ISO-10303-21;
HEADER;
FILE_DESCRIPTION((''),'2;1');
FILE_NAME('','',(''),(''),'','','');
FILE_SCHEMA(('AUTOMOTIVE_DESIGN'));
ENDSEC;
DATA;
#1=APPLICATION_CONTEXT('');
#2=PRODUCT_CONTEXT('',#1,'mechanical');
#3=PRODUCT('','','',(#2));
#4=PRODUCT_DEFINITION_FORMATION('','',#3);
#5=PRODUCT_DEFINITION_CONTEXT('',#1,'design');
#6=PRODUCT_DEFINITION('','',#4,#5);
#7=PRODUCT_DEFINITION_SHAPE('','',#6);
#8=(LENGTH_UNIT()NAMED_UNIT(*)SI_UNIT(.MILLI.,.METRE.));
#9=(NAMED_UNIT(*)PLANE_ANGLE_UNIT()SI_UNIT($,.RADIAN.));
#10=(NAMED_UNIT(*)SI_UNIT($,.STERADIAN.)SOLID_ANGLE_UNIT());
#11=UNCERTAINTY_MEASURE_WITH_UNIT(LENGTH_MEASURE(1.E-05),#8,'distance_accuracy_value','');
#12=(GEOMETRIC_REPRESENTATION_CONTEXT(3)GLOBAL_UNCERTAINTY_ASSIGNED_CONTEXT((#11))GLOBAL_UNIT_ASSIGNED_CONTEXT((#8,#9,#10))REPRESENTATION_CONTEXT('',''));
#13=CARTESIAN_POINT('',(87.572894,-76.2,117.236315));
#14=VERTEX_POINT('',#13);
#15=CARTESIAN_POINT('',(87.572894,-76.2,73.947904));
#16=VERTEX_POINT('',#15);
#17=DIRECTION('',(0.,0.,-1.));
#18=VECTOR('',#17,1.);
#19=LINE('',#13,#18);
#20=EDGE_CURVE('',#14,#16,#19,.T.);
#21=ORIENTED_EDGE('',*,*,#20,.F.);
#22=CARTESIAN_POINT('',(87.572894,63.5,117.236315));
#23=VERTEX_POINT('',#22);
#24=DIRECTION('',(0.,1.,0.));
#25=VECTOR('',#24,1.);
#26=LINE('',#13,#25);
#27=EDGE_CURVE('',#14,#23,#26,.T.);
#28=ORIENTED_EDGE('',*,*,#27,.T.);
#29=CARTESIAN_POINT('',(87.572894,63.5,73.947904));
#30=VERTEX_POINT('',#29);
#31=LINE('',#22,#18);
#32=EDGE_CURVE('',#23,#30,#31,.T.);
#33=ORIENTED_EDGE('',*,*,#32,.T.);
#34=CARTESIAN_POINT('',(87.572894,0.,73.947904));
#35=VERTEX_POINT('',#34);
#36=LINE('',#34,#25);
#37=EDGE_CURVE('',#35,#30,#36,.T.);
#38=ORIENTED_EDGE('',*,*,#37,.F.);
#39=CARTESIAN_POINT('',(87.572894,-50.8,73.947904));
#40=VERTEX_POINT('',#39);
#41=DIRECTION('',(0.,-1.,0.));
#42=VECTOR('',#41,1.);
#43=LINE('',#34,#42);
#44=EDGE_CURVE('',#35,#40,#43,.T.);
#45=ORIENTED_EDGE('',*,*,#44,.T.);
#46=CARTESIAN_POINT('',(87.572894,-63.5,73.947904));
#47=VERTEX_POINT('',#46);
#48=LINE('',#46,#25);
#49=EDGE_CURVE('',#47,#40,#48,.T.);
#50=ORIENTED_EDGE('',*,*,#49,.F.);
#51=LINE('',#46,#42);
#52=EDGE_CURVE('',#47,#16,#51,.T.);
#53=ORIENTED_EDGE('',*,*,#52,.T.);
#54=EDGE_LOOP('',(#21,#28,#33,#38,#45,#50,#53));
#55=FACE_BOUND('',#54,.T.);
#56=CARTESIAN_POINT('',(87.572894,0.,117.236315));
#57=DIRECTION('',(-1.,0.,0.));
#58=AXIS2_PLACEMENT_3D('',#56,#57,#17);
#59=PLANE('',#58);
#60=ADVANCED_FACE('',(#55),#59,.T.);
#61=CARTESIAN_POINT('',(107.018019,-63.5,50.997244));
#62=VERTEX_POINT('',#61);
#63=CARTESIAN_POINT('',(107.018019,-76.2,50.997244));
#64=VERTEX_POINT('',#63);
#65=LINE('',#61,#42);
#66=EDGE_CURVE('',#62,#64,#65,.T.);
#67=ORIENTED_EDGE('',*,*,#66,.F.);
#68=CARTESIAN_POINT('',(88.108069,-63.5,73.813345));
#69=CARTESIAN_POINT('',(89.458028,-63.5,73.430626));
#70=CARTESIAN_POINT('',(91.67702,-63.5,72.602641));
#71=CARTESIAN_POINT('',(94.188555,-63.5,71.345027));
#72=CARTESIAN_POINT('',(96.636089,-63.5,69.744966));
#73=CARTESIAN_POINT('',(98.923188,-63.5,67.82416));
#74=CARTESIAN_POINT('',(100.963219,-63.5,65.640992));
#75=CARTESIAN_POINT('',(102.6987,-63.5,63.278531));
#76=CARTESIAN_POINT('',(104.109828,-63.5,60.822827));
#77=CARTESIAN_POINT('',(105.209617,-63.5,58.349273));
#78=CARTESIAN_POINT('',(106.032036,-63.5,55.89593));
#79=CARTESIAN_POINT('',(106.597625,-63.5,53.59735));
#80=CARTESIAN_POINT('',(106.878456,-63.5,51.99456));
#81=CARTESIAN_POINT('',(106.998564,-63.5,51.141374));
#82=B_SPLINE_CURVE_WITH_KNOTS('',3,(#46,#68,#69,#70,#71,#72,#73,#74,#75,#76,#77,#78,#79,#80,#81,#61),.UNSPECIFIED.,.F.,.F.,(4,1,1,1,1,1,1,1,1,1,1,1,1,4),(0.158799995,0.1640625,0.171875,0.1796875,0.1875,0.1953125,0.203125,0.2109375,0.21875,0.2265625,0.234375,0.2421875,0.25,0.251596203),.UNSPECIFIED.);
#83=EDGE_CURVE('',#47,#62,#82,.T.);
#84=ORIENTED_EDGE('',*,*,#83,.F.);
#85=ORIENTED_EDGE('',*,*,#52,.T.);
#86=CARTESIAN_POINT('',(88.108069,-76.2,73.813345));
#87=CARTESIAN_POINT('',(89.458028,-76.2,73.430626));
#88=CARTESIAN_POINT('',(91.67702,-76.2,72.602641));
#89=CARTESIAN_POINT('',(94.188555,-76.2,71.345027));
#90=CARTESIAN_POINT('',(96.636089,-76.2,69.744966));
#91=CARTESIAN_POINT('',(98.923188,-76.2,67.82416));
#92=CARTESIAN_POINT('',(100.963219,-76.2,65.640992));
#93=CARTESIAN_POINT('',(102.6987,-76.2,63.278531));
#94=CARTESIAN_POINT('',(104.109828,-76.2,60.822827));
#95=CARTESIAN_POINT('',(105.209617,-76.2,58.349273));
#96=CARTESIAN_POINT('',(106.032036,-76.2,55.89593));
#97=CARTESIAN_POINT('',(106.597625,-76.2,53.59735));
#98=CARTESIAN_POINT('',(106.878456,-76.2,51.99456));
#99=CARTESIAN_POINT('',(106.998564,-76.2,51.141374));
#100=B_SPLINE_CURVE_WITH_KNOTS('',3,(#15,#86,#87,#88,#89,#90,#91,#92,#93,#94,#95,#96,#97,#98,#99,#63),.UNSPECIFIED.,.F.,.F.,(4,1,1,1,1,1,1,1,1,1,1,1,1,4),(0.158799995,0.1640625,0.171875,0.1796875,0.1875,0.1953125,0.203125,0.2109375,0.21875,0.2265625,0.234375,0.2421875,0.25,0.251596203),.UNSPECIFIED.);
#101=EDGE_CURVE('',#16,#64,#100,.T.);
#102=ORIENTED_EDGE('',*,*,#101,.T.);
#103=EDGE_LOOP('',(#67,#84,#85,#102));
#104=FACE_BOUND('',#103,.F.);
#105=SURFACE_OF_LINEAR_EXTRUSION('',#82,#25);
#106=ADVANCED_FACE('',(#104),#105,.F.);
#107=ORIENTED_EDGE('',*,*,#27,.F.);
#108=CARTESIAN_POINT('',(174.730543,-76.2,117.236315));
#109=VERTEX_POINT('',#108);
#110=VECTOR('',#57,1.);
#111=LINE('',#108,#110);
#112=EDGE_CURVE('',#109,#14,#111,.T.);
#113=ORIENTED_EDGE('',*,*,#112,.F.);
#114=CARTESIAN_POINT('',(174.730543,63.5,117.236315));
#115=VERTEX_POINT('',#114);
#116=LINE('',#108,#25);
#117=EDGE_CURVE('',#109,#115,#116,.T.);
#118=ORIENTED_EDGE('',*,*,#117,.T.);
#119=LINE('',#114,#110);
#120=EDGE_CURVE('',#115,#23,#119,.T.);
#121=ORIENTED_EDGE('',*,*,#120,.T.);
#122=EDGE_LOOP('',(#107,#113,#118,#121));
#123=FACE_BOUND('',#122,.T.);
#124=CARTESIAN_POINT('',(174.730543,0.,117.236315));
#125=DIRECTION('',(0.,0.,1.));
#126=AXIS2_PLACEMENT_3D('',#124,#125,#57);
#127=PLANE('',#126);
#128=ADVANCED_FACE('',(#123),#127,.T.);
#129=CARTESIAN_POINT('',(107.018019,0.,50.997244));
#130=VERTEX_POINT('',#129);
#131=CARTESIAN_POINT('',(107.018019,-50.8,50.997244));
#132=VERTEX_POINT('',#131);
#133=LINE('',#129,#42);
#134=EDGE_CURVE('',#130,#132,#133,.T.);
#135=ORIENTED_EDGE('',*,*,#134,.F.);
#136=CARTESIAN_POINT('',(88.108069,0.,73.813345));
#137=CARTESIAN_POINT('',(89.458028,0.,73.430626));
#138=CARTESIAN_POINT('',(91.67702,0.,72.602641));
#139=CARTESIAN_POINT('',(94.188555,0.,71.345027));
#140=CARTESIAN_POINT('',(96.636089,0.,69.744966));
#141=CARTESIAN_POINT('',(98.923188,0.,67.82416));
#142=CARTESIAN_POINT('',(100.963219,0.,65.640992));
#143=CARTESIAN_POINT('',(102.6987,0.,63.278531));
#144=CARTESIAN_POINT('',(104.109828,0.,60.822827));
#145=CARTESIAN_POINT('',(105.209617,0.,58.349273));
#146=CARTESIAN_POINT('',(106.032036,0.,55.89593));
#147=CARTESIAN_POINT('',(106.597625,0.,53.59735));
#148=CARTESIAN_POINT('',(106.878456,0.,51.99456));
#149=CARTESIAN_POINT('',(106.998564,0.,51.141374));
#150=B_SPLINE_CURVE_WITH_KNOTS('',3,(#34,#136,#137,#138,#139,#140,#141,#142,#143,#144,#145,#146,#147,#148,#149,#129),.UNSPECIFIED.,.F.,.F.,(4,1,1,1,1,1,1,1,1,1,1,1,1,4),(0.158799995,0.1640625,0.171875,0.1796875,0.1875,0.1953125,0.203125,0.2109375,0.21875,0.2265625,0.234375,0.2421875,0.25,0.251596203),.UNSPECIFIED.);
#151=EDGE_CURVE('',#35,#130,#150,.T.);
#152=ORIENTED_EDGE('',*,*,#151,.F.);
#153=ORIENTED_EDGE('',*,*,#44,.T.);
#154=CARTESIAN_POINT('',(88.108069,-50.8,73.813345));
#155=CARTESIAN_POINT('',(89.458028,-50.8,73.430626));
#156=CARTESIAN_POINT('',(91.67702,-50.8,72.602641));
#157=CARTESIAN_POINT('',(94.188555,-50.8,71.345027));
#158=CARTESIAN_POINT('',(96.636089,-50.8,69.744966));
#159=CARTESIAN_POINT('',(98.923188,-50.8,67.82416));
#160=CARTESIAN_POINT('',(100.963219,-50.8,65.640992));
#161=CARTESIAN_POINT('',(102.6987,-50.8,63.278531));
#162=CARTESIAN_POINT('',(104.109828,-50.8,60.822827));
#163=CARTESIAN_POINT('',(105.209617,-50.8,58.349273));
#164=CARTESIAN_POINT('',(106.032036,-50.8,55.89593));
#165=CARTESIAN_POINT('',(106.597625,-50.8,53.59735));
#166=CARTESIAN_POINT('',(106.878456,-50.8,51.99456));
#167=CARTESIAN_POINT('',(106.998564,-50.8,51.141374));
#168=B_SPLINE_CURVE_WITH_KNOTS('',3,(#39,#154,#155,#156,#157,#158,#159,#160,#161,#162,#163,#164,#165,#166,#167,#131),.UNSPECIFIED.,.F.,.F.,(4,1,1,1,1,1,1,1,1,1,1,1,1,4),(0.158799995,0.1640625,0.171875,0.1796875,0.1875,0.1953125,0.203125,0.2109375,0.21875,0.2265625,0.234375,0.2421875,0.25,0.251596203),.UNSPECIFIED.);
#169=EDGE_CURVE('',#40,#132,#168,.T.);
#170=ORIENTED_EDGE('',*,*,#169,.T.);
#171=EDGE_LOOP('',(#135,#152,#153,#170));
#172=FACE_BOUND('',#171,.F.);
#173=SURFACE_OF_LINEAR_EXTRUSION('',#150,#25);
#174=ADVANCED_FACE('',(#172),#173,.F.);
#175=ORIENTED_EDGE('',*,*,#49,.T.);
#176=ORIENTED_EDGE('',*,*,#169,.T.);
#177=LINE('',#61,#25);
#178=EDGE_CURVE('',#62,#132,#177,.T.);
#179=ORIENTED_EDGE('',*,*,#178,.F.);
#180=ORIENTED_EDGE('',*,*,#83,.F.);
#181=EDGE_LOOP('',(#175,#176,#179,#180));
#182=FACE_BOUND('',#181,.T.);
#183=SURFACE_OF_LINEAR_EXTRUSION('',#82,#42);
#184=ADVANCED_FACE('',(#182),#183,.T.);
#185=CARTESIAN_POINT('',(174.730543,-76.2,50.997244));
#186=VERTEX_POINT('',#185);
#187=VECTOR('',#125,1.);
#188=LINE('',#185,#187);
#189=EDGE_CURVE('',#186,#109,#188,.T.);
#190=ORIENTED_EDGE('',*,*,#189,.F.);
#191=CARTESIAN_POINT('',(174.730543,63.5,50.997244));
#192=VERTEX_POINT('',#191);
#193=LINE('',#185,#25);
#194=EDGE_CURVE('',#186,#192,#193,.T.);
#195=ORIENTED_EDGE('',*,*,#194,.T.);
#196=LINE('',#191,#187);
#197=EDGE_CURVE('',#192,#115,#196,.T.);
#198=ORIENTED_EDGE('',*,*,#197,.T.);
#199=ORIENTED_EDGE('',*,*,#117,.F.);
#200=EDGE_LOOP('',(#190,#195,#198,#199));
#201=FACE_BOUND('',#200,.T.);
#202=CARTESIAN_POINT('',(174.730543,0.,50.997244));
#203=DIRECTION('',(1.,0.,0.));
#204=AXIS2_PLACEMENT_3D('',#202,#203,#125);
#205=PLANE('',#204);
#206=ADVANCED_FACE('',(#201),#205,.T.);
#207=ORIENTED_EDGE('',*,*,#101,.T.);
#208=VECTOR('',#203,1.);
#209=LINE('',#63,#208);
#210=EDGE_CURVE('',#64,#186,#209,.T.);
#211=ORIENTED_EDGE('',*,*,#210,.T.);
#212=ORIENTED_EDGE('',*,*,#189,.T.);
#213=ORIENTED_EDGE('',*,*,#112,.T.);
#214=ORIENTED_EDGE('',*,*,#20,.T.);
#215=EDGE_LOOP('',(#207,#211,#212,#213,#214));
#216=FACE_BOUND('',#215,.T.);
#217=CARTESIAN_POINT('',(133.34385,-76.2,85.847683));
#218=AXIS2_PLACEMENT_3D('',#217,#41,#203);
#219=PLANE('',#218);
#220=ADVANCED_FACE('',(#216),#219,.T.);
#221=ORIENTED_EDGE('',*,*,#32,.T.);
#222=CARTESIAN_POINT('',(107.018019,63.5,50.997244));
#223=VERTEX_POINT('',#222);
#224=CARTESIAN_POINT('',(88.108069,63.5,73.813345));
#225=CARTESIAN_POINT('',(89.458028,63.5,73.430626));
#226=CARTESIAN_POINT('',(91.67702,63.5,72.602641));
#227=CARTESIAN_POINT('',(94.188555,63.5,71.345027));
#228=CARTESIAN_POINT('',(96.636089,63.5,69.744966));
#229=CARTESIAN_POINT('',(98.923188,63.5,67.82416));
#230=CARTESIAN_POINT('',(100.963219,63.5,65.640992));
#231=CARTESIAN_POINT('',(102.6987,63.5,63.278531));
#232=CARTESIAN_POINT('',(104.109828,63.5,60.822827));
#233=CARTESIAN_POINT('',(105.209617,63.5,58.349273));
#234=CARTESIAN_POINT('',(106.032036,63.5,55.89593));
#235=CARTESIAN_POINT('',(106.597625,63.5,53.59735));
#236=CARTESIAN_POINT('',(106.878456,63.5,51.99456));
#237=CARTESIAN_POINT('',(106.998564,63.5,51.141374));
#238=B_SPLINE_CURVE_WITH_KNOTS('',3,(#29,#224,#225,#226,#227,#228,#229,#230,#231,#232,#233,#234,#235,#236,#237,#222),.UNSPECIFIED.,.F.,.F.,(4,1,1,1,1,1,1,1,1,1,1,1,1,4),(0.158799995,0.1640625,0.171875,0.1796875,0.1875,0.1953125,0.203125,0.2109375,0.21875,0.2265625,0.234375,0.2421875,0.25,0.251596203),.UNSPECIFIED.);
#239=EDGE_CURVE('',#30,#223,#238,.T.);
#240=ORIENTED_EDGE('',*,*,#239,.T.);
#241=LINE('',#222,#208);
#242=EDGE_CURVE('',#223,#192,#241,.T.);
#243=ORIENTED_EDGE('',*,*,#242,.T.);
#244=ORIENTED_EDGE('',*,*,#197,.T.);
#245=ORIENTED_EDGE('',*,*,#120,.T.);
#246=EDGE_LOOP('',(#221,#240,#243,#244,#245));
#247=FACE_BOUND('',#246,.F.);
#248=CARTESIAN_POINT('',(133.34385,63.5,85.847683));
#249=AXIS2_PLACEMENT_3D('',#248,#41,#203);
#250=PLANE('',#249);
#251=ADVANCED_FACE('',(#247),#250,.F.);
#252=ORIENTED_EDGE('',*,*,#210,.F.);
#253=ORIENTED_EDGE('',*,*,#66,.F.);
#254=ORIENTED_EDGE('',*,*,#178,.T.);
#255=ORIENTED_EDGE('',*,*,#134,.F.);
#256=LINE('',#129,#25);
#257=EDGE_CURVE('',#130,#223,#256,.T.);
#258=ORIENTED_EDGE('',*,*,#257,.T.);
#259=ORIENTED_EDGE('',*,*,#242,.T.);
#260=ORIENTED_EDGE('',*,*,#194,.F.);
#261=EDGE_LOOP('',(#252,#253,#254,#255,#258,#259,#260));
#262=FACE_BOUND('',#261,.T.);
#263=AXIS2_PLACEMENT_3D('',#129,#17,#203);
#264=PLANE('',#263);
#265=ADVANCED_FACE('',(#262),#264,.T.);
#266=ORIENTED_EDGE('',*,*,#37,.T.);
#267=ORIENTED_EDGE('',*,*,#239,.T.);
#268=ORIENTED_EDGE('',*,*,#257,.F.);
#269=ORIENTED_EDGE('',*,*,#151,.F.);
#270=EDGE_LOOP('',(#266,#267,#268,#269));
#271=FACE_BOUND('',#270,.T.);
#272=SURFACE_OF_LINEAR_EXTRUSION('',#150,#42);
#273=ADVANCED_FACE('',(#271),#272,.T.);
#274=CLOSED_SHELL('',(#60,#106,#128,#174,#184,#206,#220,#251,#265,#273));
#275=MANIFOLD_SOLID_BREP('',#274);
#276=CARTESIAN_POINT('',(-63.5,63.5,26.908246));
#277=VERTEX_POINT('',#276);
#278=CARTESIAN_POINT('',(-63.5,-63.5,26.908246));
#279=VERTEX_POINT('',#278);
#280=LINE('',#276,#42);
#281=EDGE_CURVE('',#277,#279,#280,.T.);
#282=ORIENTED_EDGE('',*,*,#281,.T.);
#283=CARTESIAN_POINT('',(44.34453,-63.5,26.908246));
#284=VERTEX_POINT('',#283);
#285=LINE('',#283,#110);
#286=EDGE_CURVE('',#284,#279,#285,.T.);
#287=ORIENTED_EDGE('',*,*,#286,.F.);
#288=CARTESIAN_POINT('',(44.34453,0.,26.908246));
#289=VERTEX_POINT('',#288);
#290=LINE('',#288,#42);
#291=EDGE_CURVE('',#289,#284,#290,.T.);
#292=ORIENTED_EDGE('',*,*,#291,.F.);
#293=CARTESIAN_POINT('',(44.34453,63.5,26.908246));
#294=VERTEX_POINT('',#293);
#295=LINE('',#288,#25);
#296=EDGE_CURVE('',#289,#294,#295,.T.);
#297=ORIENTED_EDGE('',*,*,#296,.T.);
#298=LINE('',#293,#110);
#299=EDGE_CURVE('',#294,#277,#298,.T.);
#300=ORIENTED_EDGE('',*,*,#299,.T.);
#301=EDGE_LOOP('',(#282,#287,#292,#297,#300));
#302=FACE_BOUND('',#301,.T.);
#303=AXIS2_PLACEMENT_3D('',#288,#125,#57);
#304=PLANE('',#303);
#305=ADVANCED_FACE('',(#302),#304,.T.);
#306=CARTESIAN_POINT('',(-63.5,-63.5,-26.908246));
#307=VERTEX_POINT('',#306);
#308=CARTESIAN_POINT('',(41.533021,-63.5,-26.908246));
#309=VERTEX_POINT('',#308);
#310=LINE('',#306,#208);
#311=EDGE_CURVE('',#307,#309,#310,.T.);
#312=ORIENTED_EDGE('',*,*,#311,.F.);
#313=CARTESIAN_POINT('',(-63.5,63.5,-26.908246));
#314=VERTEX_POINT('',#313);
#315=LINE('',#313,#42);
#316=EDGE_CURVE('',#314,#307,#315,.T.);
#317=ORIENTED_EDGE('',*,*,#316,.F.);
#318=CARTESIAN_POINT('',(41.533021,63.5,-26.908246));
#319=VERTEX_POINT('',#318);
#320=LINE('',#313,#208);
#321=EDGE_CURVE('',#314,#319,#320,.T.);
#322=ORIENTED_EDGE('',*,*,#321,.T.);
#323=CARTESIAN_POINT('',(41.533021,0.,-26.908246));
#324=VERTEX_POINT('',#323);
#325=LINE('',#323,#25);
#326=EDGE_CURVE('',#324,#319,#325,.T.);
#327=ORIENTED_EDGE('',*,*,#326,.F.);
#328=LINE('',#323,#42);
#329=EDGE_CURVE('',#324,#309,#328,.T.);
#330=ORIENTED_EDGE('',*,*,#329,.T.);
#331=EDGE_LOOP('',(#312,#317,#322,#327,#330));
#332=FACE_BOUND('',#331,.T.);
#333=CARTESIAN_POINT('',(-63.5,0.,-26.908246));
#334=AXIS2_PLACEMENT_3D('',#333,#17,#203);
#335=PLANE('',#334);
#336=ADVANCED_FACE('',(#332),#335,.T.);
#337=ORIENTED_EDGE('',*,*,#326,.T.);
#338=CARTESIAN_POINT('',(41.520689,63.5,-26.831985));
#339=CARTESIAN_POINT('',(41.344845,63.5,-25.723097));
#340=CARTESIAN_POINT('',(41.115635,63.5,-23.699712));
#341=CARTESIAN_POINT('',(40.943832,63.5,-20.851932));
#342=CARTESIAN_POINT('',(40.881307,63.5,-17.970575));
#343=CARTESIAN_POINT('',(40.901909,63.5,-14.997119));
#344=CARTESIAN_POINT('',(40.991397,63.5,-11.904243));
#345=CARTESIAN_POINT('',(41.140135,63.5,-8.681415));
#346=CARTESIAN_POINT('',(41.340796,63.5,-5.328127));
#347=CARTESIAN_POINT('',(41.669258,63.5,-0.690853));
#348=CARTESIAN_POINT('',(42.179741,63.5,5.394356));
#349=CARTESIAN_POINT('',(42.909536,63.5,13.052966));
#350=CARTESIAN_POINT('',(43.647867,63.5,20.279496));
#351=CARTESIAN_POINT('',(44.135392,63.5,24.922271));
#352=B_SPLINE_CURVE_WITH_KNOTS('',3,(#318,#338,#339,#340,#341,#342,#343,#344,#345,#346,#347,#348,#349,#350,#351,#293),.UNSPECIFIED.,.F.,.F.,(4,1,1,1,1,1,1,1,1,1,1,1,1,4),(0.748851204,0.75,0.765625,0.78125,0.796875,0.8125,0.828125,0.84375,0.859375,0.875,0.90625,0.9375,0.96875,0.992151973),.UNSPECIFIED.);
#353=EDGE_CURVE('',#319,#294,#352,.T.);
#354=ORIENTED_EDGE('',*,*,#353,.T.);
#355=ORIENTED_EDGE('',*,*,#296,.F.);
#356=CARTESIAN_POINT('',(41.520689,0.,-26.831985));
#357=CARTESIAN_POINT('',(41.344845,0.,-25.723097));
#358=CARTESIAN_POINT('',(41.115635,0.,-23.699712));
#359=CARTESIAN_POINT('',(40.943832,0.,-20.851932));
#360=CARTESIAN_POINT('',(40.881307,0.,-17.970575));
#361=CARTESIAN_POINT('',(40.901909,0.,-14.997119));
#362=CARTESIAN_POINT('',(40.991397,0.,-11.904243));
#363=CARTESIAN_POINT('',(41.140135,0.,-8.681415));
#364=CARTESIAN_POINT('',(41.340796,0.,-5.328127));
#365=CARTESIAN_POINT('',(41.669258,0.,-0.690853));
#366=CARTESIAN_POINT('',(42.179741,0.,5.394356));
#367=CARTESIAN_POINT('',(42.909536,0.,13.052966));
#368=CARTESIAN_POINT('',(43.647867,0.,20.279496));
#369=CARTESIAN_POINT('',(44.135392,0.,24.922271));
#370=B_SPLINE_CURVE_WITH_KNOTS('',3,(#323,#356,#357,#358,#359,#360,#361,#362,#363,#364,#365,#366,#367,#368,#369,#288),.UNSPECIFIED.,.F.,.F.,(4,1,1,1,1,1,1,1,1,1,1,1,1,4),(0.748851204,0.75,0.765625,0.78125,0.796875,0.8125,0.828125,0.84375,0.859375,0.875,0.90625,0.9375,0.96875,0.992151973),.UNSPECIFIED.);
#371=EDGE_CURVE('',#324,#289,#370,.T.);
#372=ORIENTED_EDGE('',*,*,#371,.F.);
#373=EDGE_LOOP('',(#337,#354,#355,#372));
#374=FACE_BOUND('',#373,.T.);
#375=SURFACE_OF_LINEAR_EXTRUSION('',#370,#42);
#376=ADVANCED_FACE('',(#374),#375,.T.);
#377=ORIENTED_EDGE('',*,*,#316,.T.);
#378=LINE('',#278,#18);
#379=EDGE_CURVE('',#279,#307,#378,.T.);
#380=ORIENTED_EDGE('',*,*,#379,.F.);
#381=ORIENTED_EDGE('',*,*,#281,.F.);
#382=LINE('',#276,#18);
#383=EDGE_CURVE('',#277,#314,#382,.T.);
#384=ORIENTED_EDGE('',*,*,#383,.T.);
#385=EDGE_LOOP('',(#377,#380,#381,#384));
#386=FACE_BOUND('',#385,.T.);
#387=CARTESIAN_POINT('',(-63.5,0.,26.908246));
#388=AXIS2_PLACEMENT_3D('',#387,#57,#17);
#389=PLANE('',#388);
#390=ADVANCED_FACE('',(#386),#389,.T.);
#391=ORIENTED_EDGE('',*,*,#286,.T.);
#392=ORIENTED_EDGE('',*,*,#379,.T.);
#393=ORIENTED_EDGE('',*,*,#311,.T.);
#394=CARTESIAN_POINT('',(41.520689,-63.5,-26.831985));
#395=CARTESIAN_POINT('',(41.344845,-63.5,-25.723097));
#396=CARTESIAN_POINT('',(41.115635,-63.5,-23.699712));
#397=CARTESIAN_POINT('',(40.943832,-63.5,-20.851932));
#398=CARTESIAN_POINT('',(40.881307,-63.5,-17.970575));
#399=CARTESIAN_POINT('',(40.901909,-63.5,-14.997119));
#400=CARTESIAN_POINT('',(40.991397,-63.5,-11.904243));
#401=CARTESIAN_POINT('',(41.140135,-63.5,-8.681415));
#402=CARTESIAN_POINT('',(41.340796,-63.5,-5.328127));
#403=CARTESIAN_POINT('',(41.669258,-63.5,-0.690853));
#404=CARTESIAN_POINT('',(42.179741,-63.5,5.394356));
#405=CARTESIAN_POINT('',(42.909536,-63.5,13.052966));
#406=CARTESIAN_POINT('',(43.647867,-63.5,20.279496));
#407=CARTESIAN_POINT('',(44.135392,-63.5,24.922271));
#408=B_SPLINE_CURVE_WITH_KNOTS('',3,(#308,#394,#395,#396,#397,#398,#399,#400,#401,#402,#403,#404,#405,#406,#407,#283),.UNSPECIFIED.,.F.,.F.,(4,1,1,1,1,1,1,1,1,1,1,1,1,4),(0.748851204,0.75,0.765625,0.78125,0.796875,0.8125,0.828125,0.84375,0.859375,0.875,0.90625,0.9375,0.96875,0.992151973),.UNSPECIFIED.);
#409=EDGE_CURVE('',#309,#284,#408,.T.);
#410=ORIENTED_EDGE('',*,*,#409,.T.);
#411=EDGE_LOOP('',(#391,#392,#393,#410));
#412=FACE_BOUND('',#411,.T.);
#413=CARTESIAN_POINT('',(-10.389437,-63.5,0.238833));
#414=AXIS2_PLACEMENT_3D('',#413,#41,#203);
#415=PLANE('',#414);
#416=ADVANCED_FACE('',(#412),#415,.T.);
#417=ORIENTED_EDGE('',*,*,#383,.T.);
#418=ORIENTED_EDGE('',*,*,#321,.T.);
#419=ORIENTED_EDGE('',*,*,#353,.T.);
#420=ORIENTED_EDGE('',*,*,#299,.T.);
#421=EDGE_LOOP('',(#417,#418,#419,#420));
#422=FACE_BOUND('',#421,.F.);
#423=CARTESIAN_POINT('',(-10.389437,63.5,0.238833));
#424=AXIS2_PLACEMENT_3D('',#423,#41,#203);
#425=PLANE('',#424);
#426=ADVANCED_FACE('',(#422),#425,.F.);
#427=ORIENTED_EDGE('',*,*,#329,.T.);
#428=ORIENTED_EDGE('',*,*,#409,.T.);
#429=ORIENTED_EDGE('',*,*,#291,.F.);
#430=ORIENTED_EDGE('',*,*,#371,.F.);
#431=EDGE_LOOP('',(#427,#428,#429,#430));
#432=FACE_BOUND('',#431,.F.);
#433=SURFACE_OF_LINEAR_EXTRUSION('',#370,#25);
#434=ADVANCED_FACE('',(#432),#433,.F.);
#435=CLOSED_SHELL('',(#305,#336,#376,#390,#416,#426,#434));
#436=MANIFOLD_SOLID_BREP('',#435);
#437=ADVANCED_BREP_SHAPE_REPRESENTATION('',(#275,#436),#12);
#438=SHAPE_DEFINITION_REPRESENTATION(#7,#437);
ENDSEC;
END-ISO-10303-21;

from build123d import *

# Parameters (mm, degrees)
F1_DEPTH = 63.5
F2_DEPTH = 12.7


# Not quite as in the source:
# - the dataset's text gives a spline's control points without its knots; the knots are read off the source's solid


with BuildPart() as f1:
    # F0 (on Front) → F1 (new body, symmetric)
    with BuildSketch(Plane.XZ):
        with BuildLine():
            Line((44.3445303026, 26.9082457591), (-63.5, 26.9082457591))
            Line((-63.5, 26.9082457591), (-63.5, -26.9082457591))
            Line((-63.5, -26.9082457591), (41.5330206736, -26.9082457591))
            add(Edge.make_bspline(
                [(41.5330206736, -26.9082457591), (41.5206891704, -26.8319854492), (41.3448448448, -25.7230965065), (41.1156345492, -23.6997117475), (40.9438322264, -20.8519320576), (40.881307, -17.9705748006), (40.9019094918, -14.997119488), (40.9913966742, -11.9042433146), (41.1401351146, -8.6814153594), (41.3407956994, -5.32812682), (41.6692584128, -0.6908531378), (42.1797414921, 5.3943561937), (42.9095362254, 13.0529659742), (43.6478674391, 20.2794962315), (44.1353924709, 24.9222708035), (44.3445303026, 26.9082457591)],
                knots=[0.7488512035, 0.7488512035, 0.7488512035, 0.7488512035, 0.75, 0.765625, 0.78125, 0.796875, 0.8125, 0.828125, 0.84375, 0.859375, 0.875, 0.90625, 0.9375, 0.96875, 0.9921519733, 0.9921519733, 0.9921519733, 0.9921519733], degree=3))
        make_face()
    extrude(amount=F1_DEPTH, both=True)


with BuildPart() as f1b:
    # F0 (on Front) → F1, piece 2 (new body, symmetric)
    with BuildSketch(Plane.XZ):
        with BuildLine():
            add(Edge.make_bspline(
                [(87.5728937206, 73.9479044282), (88.1080690446, 73.8133450078), (89.4580280251, 73.430626286), (91.6770203646, 72.6026408552), (94.1885548405, 71.3450272992), (96.6360890257, 69.7449658053), (98.9231882342, 67.8241603771), (100.9632190462, 65.6409923948), (102.6986997876, 63.2785305227), (104.109828379, 60.8228273116), (105.2096171996, 58.3492731764), (106.0320355859, 55.8959300691), (106.5976249855, 53.5973499201), (106.8784564156, 51.9945597192), (106.99856399, 51.1413742955), (107.0180190242, 50.9972441844)],
                knots=[0.158799995, 0.158799995, 0.158799995, 0.158799995, 0.1640625, 0.171875, 0.1796875, 0.1875, 0.1953125, 0.203125, 0.2109375, 0.21875, 0.2265625, 0.234375, 0.2421875, 0.25, 0.2515962027, 0.2515962027, 0.2515962027, 0.2515962027], degree=3))
            Line((107.0180190242, 50.9972441844), (174.7305428356, 50.9972441844))
            Line((174.7305428356, 50.9972441844), (174.7305428356, 117.2363148355))
            Line((174.7305428356, 117.2363148355), (87.5728937206, 117.2363148355))
            Line((87.5728937206, 117.2363148355), (87.5728937206, 73.9479044282))
        make_face()
    extrude(amount=F1_DEPTH, both=True)

    # F2 (add, symmetric): a face of the model
    f2_faces = [f1b.faces().sort_by_distance(p)[0] for p in [
        (133.2489364203, -63.5, 85.5209468782),
    ]]
    extrude(f2_faces, amount=F2_DEPTH, both=True)


solid = Compound([f1.part, f1b.part])
